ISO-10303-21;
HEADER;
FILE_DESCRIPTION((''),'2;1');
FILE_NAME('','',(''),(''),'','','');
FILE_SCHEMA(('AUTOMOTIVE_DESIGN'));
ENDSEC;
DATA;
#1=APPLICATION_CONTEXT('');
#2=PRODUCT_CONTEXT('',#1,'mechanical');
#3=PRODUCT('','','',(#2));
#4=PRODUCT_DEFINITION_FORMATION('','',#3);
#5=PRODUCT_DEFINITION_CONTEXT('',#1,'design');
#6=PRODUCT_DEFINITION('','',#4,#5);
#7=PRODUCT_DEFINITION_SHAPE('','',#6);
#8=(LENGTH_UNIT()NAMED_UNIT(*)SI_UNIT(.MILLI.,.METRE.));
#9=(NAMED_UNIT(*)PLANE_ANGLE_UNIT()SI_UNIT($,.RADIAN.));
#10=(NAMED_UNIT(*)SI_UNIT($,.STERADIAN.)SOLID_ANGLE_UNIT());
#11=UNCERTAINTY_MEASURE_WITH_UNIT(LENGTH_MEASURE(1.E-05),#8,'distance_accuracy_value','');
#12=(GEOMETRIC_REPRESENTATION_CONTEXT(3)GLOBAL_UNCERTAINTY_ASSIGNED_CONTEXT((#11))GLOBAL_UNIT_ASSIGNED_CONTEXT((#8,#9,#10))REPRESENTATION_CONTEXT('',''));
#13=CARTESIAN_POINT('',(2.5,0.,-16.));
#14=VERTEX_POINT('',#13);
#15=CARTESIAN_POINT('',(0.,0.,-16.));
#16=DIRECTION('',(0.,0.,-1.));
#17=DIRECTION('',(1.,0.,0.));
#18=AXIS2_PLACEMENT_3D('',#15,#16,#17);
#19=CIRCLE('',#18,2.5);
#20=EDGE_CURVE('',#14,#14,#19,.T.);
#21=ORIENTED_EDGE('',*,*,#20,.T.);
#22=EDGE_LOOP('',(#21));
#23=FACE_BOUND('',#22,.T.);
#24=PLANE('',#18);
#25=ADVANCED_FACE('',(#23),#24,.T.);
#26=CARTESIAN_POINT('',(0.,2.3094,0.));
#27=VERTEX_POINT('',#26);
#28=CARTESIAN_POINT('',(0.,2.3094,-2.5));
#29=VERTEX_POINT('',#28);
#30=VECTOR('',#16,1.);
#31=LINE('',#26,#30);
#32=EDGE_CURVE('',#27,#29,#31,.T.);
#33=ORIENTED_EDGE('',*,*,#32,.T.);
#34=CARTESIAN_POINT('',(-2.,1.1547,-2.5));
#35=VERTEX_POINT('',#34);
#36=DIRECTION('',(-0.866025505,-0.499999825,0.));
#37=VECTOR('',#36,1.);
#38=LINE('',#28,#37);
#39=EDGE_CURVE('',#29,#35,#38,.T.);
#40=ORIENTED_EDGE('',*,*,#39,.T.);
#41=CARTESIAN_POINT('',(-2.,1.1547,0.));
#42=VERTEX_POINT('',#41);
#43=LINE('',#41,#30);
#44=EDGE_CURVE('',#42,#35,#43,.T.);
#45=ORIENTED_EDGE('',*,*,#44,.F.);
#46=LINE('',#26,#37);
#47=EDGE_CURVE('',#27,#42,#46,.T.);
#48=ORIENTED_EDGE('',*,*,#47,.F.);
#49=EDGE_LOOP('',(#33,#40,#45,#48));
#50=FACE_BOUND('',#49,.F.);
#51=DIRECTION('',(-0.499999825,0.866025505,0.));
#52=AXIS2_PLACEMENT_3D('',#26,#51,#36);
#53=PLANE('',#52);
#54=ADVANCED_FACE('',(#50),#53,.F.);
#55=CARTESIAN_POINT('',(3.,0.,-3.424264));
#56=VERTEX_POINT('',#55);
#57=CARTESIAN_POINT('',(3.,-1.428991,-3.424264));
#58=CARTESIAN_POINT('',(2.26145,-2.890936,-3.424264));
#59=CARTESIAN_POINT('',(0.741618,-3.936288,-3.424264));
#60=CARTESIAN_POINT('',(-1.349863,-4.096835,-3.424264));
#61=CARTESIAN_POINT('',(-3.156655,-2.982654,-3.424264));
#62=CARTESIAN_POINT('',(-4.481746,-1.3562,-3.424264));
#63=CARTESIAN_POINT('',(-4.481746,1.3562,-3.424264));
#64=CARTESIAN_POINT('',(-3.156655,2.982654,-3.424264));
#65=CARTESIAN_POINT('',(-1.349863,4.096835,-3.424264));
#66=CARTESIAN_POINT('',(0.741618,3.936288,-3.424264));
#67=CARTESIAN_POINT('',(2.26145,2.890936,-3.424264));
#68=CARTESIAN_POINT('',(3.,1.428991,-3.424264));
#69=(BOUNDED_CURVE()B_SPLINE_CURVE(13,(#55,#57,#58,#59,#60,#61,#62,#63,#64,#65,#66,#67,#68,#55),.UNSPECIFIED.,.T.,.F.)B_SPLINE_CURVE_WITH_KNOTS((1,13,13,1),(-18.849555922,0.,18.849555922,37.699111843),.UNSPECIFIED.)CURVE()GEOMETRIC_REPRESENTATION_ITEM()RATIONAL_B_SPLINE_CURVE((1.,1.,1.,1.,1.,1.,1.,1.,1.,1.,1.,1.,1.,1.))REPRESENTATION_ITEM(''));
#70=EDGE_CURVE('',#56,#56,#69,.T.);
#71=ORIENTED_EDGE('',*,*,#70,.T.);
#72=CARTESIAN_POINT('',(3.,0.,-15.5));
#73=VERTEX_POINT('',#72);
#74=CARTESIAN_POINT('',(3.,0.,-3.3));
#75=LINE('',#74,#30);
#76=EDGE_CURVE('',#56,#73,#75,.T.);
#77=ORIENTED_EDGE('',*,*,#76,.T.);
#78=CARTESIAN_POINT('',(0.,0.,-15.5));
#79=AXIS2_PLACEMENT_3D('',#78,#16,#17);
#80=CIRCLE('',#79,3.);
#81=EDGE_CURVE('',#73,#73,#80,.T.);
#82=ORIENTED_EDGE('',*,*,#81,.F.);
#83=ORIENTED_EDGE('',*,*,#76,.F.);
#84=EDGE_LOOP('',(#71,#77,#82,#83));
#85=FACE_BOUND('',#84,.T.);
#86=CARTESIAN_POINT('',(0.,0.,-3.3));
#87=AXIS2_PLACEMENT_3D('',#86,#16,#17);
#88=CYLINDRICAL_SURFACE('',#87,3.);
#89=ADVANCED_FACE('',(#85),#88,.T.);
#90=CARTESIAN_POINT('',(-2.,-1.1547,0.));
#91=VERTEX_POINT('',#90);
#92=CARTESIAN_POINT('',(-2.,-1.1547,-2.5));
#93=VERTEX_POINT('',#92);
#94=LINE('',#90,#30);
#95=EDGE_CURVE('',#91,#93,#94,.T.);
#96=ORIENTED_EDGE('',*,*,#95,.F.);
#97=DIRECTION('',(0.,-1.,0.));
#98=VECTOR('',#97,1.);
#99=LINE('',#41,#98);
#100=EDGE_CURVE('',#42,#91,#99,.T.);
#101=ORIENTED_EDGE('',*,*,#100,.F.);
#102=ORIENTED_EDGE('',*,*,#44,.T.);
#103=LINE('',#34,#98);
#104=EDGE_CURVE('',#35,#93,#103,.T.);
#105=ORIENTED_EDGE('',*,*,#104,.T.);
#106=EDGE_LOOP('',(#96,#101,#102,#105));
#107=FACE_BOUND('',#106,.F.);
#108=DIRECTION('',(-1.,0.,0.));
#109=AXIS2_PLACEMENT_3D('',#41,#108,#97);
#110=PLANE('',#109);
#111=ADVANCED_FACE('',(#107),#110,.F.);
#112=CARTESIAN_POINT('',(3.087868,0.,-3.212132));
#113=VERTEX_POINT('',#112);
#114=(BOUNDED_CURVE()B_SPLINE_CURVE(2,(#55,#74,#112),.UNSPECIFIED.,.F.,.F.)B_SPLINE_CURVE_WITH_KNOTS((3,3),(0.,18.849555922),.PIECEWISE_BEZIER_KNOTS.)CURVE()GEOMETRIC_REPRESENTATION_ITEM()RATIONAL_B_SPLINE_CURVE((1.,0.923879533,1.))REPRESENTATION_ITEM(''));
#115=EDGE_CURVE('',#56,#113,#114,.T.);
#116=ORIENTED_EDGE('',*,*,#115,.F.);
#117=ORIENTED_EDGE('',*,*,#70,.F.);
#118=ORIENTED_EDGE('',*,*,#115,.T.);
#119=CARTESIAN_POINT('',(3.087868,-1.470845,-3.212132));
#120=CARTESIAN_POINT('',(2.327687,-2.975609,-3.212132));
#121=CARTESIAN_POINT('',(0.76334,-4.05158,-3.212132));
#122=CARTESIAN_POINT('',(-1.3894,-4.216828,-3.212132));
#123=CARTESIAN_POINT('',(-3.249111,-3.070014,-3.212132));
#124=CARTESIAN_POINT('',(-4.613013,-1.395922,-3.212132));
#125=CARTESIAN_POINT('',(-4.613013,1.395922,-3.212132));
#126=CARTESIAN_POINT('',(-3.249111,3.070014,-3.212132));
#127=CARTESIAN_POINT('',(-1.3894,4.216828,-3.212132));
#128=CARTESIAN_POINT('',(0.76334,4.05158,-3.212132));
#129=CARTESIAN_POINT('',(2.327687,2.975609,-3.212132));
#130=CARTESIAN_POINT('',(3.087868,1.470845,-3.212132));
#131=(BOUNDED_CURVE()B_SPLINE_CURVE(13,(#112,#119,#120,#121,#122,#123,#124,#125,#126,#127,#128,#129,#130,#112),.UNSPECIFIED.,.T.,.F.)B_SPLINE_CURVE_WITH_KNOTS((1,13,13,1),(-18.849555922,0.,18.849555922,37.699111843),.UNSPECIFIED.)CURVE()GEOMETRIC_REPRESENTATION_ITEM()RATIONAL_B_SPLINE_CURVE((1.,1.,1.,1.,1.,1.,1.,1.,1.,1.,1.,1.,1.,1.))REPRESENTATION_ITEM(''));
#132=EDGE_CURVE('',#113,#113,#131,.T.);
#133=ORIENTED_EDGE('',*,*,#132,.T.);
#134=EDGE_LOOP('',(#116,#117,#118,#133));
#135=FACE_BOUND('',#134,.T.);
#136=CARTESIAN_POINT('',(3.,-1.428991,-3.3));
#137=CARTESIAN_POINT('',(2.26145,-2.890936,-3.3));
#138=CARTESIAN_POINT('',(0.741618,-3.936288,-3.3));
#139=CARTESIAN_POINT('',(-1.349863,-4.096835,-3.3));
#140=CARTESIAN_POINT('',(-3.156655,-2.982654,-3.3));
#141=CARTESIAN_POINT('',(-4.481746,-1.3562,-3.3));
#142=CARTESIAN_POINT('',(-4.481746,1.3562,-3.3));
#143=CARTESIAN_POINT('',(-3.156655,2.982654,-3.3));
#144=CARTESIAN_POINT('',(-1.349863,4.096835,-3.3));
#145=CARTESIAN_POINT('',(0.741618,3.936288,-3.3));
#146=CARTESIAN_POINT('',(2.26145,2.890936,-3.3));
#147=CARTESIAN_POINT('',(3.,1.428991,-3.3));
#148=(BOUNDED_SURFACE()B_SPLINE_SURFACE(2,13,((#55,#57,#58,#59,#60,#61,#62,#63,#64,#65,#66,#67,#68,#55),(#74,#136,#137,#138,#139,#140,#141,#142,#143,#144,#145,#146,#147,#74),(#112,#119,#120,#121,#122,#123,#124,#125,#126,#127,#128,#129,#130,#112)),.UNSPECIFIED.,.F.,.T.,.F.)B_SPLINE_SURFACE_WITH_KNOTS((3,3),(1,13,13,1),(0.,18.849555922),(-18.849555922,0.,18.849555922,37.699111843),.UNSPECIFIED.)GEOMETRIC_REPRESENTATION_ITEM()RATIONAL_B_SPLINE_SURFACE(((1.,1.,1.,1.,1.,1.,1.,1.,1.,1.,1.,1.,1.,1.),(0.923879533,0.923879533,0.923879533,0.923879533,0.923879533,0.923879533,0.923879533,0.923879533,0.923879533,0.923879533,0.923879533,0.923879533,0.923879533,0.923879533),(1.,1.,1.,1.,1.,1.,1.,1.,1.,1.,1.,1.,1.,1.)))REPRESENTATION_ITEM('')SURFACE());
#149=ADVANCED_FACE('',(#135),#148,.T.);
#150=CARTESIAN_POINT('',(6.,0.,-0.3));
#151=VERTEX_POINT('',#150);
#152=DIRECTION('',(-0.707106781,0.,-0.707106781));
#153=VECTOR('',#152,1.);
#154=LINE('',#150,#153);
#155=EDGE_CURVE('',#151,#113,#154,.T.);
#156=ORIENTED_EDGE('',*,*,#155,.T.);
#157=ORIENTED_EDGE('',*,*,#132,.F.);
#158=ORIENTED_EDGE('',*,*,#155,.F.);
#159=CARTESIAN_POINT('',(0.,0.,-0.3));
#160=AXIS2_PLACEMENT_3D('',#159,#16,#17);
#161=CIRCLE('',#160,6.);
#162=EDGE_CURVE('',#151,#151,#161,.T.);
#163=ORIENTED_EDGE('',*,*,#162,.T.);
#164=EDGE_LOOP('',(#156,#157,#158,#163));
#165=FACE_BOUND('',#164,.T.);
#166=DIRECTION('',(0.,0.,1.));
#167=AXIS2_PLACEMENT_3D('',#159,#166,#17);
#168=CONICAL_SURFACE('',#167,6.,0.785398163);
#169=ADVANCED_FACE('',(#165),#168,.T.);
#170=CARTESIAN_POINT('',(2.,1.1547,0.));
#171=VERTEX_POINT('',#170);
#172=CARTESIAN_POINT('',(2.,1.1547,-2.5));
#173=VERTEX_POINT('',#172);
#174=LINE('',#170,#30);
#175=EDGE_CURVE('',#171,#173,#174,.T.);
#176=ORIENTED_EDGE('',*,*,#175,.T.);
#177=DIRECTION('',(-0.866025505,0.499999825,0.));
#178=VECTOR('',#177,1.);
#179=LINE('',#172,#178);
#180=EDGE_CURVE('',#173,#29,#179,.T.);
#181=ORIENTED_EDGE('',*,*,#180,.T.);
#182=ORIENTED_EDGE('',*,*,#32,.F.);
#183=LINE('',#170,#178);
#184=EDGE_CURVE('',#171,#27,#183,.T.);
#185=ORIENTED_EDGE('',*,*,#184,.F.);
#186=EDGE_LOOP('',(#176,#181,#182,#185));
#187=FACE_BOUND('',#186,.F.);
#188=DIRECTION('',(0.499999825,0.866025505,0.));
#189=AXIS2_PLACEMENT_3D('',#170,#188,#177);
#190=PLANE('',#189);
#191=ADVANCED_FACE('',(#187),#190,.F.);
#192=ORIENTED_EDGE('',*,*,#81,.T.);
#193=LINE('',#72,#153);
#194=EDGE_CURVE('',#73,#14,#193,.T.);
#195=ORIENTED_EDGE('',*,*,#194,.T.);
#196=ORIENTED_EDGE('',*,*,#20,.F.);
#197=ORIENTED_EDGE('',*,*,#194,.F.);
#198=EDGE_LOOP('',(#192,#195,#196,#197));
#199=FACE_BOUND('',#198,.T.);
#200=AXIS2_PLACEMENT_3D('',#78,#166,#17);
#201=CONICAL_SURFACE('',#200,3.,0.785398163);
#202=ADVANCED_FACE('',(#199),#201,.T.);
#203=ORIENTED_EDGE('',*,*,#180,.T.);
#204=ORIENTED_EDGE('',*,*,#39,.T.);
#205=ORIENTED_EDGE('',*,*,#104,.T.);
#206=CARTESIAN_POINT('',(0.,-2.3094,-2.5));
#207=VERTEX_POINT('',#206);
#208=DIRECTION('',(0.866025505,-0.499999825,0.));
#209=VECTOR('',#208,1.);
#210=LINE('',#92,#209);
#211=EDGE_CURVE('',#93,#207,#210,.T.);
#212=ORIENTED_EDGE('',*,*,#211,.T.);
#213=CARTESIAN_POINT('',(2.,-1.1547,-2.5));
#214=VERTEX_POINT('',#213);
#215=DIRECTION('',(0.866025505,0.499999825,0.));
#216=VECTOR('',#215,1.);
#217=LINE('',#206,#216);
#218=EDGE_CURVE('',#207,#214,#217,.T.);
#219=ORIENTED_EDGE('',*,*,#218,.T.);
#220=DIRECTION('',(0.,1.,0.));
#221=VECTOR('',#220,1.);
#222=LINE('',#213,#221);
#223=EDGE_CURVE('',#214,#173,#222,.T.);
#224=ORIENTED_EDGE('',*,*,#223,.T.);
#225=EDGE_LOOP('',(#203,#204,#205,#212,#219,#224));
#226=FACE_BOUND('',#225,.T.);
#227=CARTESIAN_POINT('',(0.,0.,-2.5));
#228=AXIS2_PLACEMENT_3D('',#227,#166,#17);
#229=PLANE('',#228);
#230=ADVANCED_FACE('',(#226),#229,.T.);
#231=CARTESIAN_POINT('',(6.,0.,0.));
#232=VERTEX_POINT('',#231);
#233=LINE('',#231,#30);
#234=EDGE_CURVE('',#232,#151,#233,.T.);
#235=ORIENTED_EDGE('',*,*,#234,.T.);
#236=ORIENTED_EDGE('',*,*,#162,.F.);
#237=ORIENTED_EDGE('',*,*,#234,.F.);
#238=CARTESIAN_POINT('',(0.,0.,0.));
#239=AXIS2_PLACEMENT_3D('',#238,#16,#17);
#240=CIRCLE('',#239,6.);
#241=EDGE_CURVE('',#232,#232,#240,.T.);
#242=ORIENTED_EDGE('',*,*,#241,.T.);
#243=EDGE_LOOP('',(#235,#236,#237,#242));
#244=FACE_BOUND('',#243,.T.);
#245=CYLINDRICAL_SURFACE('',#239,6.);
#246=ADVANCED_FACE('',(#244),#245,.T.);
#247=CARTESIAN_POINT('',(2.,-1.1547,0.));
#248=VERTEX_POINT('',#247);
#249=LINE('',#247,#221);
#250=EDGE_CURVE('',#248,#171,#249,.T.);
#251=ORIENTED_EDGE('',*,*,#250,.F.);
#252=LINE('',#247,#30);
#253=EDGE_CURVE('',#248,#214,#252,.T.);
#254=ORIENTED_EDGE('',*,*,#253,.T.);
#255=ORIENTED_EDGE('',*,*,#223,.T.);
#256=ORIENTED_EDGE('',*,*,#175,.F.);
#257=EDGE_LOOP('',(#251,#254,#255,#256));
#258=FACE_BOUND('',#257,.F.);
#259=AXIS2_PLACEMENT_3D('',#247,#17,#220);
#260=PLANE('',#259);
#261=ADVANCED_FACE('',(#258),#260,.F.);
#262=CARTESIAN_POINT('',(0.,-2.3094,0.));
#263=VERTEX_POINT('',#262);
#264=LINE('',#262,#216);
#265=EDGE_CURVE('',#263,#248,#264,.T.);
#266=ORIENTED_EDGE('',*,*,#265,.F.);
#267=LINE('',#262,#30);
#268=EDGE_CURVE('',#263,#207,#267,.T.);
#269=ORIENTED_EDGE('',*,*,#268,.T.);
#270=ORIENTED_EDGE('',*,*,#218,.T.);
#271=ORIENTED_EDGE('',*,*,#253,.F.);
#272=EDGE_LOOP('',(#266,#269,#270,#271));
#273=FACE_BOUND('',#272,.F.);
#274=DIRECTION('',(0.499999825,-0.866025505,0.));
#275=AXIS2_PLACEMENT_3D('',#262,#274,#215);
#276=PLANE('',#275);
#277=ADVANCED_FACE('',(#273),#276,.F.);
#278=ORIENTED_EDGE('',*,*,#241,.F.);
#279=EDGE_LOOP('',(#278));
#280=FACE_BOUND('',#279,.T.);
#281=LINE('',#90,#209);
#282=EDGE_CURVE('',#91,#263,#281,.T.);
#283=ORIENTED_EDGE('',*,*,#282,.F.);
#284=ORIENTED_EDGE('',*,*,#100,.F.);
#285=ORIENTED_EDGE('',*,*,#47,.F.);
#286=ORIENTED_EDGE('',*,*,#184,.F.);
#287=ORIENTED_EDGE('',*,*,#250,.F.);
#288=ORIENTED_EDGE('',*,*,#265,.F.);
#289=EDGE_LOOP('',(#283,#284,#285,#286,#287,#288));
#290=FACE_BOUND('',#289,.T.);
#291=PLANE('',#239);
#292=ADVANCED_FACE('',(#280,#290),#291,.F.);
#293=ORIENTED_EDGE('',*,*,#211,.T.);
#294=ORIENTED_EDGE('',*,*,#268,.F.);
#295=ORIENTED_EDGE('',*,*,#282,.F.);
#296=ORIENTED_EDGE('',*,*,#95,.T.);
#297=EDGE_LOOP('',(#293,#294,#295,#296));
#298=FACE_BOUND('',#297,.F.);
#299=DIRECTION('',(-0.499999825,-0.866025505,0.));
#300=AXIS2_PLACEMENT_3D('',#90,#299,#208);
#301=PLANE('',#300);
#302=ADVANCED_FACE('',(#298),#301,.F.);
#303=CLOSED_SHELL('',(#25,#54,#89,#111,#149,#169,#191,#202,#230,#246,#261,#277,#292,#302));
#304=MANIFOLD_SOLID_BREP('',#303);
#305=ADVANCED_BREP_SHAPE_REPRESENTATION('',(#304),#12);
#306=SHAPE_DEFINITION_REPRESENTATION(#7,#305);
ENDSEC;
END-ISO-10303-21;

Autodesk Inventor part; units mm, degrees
ref_plane "YZ Plane" through (0, 0, 0) normal (1, 0, 0) x (0, 1, 0)
sketch "Sketch1" plane through (0, 0, 0) normal (0, 1, 0) x (-1, 0, 0)
  point P0 (0, 0)
sketch "Sketch2" plane through (0, 0, 0) normal (0, 1, 0) x (-1, 0, 0)
  line L0 (-3, -16) -> (0, -16)
  line L1 (-3, -3.3) -> (-3, -16)
  line L2 (-6, -0.3) -> (-3, -3.3)
  line L3 (-6, 0) -> (-6, -0.3)
  line L4 (0, 0) -> (-6, 0)
  line L5 (0, -16) -> (0, 0)
  line L6 (0, -16) -> (0, 0)
  line L7 (0, -19.2) -> (0, 3.2) projected
  line L8 (1.2, 0) -> (-7.2, 0) projected
  dimension "d3" = 6
  dimension "d5" = 3
  dimension "d7" = 16
  dimension "ParC" = 0.3
  dimension "d22" = 0
  dimension "d23" = 0
  dimension "d43" = 45
revolve "Revolution1" add sketch "Sketch2" angle 360 about axis through (0, 0, -16) along (0, 0, -1)
sketch "Sketch3" plane through (0, 0, 0) normal (0, 0, 1) x (1, 0, 0)
  line L0 (-2, 1.1547) -> (-2, -1.1547)
  line L1 (0, 2.3094) -> (-2, 1.1547)
  line L2 (2, 1.1547) -> (0, 2.3094)
  line L3 (2, -1.1547) -> (2, 1.1547)
  line L4 (0, -2.3094) -> (2, -1.1547)
  line L5 (-2, -1.1547) -> (0, -2.3094)
  circle A0 centre (0, 0) radius 2 construction
  circle A1 centre (0, 0) radius 3 construction
  dimension "d11" = 4
  dimension "d13" = 120
  dimension "d15" = 120
extrude "Extrusion1" cut sketch "Sketch3" against normal blind 2.5
fillet "Fillet1" radius 0.3 1 edges at (-3, 0, -3.3)
chamfer "Chamfer1" distance 0.5 angle 45 1 edges at (-3, 0, -16) measured on face at (2.4612, -1.7154, -11.8081)
thread "Thread1" size "M6x1" class "6g" standard "ISO Metric profile" length 10.7
ref_plane "MSC_PF1" through (0, 0, 0) normal (1, 0, 0) x (0, 1, 0)
ref_plane "MSC_PT1" through (0, 0, 0) normal (0, 0, -1) x (-1, 0, 0)
equation "\"d18\" = r"
equation "\"d19\" = 0.5 * PTC"
equation "\"d39\" = 0.5 * PTC"
equation "\"d3\" = 0.5 * dk"
equation "\"d5\" = 0.5 * NND"
equation "\"d7\" = NLG"
equation "\"d43\" = 0.5 * ang"
equation "\"d11\" = ParS"
equation "\"d16\" = ParT"
equation "\"NND\" = 6"
equation "\"PTC\" = 1"
equation "\"dk\" = 12"
equation "\"ParK\" = 3.3"
equation "\"ParS\" = 4"
equation "\"ParT\" = 2.5"
equation "\"r\" = 0.3"
equation "\"NLG\" = 16"
equation "\"ang\" = 90deg"
equation "\"THREADDIA\" = NND"
properties part number "DIN 7991 - M6x16" material "Steel, Mild"
